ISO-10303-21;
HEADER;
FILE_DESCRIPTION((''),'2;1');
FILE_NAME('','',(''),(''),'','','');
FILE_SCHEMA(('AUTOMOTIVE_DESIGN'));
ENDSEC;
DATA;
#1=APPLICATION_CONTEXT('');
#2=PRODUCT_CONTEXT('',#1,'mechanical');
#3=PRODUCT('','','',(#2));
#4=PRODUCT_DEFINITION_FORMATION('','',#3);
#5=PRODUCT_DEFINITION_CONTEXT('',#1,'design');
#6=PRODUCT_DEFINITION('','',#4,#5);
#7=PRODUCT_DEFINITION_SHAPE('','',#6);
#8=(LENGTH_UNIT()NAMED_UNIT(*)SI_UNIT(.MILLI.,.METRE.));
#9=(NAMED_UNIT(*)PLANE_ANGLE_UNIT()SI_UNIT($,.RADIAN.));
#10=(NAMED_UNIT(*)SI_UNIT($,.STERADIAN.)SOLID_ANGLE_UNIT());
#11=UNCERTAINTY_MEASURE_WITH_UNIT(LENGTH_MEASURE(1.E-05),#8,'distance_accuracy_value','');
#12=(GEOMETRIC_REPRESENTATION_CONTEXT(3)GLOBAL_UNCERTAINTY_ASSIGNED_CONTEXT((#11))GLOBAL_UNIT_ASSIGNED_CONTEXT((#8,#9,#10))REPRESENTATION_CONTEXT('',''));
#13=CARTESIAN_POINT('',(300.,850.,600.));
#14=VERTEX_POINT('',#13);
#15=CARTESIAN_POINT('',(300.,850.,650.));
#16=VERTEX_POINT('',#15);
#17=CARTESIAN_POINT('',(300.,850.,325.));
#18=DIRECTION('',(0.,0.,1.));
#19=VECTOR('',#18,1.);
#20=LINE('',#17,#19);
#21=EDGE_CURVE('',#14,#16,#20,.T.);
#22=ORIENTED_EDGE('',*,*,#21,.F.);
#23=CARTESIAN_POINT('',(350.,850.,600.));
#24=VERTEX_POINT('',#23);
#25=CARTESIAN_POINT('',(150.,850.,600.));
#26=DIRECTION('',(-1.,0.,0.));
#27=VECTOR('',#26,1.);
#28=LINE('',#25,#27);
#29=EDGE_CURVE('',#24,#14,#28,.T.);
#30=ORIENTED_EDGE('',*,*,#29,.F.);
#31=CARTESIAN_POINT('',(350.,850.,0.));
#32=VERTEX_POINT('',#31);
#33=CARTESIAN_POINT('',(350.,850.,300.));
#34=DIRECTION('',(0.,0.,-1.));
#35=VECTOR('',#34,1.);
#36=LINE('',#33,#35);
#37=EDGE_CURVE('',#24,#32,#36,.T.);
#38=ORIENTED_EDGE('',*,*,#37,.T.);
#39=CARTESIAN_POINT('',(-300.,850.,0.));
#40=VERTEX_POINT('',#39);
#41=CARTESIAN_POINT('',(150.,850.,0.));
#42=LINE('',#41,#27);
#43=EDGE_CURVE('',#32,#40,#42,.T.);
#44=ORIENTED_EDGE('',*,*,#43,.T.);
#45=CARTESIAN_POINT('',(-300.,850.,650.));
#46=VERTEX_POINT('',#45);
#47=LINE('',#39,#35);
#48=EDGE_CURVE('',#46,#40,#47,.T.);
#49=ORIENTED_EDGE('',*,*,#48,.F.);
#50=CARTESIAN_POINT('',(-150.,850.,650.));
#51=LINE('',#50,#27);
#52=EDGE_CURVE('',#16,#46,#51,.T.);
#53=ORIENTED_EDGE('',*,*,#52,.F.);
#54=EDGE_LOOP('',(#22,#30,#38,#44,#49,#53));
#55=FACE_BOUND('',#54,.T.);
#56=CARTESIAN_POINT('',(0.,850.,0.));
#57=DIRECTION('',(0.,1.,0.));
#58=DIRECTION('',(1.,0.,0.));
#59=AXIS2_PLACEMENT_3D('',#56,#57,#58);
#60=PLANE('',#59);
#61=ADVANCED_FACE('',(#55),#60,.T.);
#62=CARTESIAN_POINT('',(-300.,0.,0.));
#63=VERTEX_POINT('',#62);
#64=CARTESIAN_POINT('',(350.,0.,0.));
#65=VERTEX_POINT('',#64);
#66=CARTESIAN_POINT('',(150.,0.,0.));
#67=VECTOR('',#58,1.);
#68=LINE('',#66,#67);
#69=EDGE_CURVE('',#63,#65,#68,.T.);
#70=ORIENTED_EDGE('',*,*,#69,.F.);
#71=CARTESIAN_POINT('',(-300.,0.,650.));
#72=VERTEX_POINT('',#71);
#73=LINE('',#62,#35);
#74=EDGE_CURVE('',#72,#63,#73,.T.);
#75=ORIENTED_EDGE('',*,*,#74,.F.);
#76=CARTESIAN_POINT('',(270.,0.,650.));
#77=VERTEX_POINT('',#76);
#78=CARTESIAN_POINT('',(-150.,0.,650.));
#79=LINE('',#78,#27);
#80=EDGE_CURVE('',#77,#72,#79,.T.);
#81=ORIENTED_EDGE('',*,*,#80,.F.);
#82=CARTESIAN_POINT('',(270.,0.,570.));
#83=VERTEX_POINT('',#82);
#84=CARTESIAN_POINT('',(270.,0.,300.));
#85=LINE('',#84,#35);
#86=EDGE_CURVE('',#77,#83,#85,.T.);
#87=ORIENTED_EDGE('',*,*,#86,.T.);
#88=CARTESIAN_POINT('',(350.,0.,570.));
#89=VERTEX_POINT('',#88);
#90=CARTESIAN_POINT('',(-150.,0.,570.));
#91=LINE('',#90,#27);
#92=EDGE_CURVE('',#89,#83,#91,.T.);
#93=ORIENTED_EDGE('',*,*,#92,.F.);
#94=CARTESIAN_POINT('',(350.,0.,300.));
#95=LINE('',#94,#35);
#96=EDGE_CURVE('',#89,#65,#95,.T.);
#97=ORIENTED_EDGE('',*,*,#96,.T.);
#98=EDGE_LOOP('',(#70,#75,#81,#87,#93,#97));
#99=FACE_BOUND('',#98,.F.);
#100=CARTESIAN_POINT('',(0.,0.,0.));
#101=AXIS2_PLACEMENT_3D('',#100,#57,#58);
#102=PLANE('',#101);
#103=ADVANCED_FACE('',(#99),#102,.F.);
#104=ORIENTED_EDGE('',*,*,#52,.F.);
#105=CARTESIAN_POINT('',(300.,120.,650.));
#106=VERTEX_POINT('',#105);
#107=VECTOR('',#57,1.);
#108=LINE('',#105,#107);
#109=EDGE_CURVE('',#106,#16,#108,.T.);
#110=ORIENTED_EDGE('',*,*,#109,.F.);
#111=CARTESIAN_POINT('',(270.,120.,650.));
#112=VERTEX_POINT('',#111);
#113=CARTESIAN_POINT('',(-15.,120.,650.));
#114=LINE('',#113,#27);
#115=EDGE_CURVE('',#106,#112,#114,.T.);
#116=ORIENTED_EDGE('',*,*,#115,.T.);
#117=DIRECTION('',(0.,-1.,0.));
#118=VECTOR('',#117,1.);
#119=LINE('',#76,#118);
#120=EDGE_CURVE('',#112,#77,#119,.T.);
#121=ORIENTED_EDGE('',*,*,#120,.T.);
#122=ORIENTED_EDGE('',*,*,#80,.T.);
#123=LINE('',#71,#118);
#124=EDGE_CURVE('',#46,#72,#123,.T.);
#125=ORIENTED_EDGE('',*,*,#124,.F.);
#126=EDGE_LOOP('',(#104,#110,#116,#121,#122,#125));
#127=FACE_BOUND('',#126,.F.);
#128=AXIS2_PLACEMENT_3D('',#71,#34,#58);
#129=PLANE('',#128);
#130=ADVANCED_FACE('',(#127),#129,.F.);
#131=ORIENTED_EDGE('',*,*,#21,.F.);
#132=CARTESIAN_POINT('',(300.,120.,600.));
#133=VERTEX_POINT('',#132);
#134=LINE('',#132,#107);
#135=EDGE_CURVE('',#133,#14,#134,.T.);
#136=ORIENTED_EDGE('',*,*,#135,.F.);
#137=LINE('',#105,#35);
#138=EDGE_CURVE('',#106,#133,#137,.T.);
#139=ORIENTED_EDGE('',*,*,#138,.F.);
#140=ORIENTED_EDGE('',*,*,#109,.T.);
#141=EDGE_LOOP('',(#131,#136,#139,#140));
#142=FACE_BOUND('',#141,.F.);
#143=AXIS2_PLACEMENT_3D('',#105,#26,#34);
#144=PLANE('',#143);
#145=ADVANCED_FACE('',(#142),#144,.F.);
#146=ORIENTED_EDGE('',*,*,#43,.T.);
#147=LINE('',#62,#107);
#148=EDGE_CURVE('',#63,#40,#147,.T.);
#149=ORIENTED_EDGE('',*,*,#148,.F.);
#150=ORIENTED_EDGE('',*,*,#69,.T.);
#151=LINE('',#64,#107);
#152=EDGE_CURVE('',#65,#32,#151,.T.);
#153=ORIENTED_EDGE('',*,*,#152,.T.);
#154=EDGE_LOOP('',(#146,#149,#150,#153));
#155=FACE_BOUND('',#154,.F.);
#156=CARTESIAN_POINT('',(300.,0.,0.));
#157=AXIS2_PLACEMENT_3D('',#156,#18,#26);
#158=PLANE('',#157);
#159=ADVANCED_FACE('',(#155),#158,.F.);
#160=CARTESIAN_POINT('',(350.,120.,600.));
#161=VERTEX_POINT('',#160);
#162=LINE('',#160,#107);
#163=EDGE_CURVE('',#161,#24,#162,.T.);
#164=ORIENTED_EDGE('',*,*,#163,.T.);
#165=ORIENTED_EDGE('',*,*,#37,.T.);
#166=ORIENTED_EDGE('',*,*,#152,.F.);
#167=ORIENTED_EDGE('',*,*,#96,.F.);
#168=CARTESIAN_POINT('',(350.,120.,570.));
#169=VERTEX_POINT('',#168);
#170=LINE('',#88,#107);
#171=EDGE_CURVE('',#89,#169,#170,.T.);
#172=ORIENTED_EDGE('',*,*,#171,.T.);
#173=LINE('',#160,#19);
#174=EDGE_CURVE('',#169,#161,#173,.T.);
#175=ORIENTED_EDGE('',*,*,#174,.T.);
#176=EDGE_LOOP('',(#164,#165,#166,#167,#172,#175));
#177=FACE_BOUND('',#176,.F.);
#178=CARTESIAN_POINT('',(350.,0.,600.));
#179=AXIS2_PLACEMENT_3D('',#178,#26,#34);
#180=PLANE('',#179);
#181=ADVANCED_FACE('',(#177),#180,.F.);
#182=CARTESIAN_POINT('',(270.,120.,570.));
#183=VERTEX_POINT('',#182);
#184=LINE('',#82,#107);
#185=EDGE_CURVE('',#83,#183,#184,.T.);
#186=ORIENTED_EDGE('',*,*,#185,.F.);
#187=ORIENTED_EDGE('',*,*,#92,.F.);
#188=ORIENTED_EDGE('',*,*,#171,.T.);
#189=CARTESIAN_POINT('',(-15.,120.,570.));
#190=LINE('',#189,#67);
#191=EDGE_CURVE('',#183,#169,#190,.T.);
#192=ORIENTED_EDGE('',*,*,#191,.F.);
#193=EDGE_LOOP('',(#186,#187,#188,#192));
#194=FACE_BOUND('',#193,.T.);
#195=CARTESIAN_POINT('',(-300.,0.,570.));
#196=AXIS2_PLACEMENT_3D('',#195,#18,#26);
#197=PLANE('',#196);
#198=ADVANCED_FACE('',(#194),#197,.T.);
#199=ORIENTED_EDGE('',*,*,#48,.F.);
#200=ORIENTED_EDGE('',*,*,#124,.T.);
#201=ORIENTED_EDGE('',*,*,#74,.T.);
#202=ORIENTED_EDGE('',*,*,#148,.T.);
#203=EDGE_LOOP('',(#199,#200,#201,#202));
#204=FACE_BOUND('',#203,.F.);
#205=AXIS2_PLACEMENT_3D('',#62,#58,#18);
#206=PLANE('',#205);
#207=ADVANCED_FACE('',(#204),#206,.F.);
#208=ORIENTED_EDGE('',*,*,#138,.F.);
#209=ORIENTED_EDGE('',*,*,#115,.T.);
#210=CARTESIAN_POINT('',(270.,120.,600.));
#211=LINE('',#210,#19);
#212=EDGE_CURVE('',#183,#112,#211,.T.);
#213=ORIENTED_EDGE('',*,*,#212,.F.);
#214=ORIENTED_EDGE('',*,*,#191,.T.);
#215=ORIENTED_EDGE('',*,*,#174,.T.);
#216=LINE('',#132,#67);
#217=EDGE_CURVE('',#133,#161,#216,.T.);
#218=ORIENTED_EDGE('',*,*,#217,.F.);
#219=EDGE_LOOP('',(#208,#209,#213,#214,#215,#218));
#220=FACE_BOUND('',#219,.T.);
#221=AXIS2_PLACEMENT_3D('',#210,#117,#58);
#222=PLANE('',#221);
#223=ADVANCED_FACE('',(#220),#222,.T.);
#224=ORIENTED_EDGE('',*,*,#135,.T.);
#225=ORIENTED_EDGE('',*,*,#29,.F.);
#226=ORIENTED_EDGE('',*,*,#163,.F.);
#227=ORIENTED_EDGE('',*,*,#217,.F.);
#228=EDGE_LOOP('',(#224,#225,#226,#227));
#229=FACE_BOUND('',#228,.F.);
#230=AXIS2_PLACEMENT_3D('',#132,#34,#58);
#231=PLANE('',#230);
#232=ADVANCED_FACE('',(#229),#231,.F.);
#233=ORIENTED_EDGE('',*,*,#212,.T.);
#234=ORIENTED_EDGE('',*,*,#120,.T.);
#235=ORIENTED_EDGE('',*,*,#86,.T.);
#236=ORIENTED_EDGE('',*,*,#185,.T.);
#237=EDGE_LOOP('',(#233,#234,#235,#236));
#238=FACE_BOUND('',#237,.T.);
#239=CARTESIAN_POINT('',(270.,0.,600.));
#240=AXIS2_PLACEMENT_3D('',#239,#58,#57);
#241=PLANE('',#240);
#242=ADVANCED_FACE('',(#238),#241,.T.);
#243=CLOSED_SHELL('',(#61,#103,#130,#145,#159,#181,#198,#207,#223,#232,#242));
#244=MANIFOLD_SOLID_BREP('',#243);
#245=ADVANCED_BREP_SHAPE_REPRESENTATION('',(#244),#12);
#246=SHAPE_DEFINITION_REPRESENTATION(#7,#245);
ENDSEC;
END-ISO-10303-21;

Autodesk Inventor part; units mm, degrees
ref_plane "YZ Plane" through (0, 0, 0) normal (1, 0, 0) x (0, 1, 0)
ref_plane "XZ Plane" through (0, 0, 0) normal (0, 1, 0) x (-1, 0, 0)
ref_plane "XY Plane" through (0, 0, 0) normal (0, 0, 1) x (1, 0, 0)
sketch "Sketch1" plane through (0, 0, 0) normal (0, 1, 0) x (1, 0, 0)
  line L0 (300, 0) -> (-300, 0)
  line L1 (-300, 0) -> (-300, -600)
  line L2 (-300, -600) -> (300, -600)
  line L3 (300, -600) -> (300, 0)
  point P0 (0, 0)
  point P1 (0, 0)
  dimension "d0" = 600
  dimension "d1" = 600
extrude "Extrusion1" add sketch "Sketch1" along normal blind 850
sketch "Sketch2" plane through (-300, 0, 600) normal (0, 0, 1) x (-1, 0, 0)
  line L0 (-600, 0) -> (-600, -850) projected
  line L1 (-600, 0) -> (-570, 0)
  line L2 (-570, 0) -> (-570, -120)
  line L3 (-570, -120) -> (-600, -120)
  line L4 (-600, -120) -> (-600, 0)
  point P0 (-300, 0)
  dimension "d4" = 120
  dimension "d7" = 30
extrude "Extrusion2" cut sketch "Sketch2" against normal blind 30
move faces "Move3" translate (50, 0, 0) faces at (300, 323.3333, 190)
move faces "Move4" translate (0, 0, 50) faces at (-110, 323.3333, 600)
sketch "Sketch3" plane through (270, 120, 570) normal (0, -1, 0) x (1, 0, 0)
  line L0 (-570, 80) -> (80, 80) projected
  line L1 (80, 80) -> (30, 80)
  line L2 (30, 80) -> (30, 30)
  line L3 (30, 30) -> (80, 30)
  line L4 (80, 30) -> (80, 80)
  line L5 (-570, 80) -> (-570, -570) projected
  line L6 (-570, -570) -> (80, -570) projected
  point P0 (-270, -570)
  dimension "d20" = 600
  dimension "d21" = 600
extrude "Extrusion3" cut sketch "Sketch3" against normal through all
properties part number "Mobile angolo"
